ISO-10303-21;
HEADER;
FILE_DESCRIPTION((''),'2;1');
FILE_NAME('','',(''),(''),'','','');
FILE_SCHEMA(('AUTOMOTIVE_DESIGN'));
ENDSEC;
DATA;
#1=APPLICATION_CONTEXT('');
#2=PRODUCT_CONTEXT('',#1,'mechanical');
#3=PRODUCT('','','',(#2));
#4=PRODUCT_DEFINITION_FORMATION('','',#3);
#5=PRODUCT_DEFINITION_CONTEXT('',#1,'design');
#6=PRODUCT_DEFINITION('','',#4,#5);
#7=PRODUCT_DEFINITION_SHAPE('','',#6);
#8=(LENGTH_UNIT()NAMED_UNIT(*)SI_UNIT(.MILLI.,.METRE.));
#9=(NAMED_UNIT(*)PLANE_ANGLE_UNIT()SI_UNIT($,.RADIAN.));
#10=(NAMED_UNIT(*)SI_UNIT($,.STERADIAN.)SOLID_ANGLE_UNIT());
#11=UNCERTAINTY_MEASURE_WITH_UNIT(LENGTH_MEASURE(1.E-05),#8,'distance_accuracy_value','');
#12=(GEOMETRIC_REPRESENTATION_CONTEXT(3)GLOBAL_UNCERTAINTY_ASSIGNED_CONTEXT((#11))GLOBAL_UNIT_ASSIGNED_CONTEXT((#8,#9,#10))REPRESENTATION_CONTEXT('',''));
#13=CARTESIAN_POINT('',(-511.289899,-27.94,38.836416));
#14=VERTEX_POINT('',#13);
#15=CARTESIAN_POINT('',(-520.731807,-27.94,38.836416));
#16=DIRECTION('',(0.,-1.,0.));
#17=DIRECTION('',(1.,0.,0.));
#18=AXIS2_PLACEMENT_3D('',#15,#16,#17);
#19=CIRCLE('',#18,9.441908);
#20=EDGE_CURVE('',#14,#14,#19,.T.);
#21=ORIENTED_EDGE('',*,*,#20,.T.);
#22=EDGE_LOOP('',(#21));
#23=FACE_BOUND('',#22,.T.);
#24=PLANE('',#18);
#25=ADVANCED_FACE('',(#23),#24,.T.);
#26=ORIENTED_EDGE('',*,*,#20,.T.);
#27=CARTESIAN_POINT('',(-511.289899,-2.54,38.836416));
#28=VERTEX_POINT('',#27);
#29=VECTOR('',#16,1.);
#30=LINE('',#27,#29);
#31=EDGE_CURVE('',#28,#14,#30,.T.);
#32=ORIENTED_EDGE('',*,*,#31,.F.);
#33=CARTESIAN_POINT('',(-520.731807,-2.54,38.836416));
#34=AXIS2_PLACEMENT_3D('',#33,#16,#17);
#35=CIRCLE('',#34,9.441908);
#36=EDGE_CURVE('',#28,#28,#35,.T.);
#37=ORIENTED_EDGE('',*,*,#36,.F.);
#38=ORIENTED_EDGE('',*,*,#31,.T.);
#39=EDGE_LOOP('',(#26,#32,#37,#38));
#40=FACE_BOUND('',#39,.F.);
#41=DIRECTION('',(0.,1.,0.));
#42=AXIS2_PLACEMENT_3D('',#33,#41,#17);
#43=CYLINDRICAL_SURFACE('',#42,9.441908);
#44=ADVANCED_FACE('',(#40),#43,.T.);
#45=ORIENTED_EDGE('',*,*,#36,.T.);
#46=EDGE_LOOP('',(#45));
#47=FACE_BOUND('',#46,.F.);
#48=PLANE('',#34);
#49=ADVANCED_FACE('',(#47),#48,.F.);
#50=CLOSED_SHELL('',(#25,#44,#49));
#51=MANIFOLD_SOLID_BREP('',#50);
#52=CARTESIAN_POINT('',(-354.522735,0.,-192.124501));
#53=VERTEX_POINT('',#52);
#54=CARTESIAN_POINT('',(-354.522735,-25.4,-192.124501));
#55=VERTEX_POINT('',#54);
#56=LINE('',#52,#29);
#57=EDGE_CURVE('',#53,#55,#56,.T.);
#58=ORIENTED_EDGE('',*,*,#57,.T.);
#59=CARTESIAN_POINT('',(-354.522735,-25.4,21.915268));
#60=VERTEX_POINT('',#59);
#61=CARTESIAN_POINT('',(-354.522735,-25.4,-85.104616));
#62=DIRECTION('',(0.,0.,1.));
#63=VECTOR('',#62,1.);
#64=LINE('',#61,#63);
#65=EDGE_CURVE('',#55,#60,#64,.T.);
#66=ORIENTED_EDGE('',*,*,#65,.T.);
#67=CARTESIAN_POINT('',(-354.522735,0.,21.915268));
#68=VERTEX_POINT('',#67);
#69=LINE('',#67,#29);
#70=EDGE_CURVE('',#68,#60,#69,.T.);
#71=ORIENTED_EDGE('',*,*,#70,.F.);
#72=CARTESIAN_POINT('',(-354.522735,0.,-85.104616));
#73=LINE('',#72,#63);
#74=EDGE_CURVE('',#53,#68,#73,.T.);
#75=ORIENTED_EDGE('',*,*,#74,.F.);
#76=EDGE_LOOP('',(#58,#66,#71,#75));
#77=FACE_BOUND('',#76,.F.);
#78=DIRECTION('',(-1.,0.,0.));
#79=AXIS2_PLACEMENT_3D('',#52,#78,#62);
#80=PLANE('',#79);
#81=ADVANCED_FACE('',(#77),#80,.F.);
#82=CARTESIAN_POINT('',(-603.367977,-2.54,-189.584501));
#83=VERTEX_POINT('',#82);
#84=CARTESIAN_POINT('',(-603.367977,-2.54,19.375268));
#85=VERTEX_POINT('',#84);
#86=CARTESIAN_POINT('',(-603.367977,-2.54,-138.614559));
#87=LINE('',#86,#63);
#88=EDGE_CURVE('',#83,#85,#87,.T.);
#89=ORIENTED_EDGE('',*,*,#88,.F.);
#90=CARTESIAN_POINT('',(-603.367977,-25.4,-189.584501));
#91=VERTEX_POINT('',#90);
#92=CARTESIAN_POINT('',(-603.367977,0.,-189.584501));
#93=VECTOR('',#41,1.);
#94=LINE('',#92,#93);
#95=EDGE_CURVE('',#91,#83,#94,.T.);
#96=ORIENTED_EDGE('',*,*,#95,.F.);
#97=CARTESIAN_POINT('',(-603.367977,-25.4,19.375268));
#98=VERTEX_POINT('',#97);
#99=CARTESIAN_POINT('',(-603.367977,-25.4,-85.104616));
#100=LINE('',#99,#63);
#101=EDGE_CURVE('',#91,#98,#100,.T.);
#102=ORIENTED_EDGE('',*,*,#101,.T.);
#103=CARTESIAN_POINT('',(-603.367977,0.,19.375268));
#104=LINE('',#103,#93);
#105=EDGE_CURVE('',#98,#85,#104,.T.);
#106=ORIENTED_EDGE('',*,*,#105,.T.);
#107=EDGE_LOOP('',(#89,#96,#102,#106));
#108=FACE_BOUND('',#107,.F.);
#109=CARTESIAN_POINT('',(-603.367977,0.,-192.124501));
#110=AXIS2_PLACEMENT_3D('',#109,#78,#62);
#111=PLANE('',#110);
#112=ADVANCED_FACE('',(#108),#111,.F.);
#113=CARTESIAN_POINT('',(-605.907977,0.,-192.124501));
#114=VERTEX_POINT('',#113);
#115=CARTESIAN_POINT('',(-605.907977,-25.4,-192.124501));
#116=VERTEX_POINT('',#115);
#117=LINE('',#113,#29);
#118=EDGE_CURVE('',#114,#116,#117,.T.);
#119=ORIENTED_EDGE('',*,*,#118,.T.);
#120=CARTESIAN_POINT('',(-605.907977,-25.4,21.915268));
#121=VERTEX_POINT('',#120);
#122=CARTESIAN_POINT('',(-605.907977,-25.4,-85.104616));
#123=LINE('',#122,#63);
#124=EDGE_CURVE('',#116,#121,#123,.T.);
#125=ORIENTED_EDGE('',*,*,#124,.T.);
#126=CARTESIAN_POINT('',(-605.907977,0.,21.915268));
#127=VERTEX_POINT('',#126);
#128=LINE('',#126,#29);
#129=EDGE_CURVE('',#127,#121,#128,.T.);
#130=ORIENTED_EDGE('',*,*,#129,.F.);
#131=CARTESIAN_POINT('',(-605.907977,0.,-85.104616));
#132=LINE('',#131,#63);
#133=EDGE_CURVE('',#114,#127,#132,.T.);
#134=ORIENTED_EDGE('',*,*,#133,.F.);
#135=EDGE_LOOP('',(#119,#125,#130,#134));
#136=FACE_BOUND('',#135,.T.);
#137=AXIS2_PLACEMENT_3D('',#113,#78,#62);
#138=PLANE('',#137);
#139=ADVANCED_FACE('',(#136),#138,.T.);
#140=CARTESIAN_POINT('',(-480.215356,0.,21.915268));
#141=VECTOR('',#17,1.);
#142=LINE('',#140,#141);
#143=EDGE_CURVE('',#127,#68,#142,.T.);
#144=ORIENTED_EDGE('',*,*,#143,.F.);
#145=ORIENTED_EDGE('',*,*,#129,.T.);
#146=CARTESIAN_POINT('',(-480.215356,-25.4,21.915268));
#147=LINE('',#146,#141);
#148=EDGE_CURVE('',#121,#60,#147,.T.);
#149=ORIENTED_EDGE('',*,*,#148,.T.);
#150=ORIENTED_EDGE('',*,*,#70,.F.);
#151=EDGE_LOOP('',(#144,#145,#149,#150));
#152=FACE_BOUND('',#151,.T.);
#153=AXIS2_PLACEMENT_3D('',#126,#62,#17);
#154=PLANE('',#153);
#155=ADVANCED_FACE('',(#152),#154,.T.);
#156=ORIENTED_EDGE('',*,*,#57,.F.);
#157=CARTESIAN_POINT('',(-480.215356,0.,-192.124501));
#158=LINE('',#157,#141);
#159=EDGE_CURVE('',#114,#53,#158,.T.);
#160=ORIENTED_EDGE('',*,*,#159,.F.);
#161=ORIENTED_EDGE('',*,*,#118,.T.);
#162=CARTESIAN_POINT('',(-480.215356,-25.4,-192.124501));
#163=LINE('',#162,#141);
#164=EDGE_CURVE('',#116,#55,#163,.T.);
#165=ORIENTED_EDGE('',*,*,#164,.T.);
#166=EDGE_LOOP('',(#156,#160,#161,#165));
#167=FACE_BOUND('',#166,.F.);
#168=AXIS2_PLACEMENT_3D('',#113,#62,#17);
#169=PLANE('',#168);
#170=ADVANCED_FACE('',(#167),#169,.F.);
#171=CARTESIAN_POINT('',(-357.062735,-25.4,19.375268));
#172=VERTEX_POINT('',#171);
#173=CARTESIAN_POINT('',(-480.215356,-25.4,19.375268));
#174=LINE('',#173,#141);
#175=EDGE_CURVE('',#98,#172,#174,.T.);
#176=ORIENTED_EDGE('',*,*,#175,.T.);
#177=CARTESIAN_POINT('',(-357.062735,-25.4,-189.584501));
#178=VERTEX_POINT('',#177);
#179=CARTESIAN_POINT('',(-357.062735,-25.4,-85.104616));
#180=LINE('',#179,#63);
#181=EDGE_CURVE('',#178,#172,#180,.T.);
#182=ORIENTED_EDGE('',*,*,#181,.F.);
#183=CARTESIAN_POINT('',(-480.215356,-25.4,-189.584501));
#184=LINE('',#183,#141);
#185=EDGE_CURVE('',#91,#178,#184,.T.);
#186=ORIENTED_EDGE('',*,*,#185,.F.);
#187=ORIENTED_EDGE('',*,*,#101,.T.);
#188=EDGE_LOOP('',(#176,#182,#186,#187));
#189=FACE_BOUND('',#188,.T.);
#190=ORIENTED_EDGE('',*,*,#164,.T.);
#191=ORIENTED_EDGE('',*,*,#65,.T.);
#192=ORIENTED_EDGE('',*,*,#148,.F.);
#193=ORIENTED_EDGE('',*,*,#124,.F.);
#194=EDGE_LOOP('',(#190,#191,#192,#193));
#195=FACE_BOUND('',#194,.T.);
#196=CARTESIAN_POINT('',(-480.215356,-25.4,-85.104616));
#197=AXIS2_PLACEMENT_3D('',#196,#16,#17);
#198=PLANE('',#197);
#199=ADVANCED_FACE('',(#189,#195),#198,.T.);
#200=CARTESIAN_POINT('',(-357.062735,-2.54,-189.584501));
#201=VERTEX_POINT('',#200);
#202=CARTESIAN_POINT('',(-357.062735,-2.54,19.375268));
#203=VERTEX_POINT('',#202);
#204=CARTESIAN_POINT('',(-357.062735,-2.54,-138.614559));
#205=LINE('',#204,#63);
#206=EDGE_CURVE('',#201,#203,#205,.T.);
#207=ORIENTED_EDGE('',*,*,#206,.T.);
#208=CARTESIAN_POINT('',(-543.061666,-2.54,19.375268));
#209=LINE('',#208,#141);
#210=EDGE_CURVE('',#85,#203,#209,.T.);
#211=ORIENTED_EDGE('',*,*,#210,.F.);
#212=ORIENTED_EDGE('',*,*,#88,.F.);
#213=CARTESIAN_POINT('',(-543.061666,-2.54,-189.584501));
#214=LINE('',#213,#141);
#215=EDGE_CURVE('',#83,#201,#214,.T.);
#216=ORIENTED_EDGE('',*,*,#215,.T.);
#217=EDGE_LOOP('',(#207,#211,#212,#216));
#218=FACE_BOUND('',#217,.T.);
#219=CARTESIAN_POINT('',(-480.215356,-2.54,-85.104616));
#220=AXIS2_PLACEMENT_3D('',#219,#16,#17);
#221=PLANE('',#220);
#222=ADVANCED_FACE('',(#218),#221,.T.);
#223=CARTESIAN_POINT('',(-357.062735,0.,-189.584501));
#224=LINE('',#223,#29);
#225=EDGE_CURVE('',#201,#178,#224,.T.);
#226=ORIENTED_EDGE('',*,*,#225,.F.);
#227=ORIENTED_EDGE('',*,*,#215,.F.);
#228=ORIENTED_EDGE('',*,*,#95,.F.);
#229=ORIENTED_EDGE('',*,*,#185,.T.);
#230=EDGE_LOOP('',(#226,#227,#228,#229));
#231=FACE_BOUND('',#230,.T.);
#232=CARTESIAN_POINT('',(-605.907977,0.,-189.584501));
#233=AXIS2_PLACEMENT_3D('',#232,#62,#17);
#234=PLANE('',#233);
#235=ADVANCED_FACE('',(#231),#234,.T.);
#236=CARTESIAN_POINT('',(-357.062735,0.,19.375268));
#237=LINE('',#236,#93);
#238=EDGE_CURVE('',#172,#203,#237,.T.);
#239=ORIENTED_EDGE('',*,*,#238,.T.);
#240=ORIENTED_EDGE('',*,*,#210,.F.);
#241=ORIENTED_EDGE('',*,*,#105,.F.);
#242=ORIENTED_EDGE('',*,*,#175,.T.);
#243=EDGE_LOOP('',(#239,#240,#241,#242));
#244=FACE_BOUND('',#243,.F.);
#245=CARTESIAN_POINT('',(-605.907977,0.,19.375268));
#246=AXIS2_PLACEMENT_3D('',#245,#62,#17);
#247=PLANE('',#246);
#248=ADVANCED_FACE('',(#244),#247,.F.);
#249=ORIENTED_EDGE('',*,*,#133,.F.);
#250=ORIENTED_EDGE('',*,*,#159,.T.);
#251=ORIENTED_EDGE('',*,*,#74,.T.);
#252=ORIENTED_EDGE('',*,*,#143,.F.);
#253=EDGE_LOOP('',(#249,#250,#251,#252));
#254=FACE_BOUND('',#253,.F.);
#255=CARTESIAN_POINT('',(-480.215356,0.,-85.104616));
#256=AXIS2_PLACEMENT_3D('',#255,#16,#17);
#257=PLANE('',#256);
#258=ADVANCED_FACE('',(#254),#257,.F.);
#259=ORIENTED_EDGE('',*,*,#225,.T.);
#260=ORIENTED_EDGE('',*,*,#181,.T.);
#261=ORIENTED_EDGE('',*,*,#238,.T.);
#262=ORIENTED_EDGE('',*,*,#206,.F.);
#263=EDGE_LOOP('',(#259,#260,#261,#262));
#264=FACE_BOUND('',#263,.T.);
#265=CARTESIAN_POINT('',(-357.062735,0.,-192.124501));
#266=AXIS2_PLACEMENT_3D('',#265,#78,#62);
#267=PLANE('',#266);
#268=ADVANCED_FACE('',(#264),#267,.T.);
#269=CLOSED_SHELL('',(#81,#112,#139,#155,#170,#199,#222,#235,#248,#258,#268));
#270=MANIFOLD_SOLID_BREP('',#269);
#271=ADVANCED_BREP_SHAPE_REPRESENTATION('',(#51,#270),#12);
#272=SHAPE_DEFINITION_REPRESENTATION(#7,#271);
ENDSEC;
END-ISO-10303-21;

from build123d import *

# Parameters (mm, degrees)
F0_W     = 251.3852417469
F0_H     = 214.0397690237
F2_DEPTH = 25.4
F3_T     = -2.54
F4_R     = 9.4419076599
F5_DEPTH = 25.4


# Not quite as in the source:
# - the program builds the solid bodies; features that only make, move or delete a surface that nothing else refers to are left out


with BuildPart() as f2:
    # F0 (on Front) → F2 (new body)
    with BuildSketch(Plane.XZ):
        with Locations((-480.2153557539, -85.1046163589)):
            Rectangle(F0_W, F0_H)
    extrude(amount=F2_DEPTH)

    # F3
    f3_openings = [f2.faces().sort_by_distance(p)[0] for p in [
        (-480.215356, -25.4, -85.104616),
    ]]
    offset(amount=F3_T, openings=f3_openings)


with BuildPart() as f5:
    # F4 (on face) → F5 (new body)
    with BuildSketch(Plane.XZ.offset(2.54)):
        with Locations((-520.7318067551, 38.8364158571)):
            Circle(F4_R)
    extrude(amount=F5_DEPTH)


solid = Compound([f2.part, f5.part])
